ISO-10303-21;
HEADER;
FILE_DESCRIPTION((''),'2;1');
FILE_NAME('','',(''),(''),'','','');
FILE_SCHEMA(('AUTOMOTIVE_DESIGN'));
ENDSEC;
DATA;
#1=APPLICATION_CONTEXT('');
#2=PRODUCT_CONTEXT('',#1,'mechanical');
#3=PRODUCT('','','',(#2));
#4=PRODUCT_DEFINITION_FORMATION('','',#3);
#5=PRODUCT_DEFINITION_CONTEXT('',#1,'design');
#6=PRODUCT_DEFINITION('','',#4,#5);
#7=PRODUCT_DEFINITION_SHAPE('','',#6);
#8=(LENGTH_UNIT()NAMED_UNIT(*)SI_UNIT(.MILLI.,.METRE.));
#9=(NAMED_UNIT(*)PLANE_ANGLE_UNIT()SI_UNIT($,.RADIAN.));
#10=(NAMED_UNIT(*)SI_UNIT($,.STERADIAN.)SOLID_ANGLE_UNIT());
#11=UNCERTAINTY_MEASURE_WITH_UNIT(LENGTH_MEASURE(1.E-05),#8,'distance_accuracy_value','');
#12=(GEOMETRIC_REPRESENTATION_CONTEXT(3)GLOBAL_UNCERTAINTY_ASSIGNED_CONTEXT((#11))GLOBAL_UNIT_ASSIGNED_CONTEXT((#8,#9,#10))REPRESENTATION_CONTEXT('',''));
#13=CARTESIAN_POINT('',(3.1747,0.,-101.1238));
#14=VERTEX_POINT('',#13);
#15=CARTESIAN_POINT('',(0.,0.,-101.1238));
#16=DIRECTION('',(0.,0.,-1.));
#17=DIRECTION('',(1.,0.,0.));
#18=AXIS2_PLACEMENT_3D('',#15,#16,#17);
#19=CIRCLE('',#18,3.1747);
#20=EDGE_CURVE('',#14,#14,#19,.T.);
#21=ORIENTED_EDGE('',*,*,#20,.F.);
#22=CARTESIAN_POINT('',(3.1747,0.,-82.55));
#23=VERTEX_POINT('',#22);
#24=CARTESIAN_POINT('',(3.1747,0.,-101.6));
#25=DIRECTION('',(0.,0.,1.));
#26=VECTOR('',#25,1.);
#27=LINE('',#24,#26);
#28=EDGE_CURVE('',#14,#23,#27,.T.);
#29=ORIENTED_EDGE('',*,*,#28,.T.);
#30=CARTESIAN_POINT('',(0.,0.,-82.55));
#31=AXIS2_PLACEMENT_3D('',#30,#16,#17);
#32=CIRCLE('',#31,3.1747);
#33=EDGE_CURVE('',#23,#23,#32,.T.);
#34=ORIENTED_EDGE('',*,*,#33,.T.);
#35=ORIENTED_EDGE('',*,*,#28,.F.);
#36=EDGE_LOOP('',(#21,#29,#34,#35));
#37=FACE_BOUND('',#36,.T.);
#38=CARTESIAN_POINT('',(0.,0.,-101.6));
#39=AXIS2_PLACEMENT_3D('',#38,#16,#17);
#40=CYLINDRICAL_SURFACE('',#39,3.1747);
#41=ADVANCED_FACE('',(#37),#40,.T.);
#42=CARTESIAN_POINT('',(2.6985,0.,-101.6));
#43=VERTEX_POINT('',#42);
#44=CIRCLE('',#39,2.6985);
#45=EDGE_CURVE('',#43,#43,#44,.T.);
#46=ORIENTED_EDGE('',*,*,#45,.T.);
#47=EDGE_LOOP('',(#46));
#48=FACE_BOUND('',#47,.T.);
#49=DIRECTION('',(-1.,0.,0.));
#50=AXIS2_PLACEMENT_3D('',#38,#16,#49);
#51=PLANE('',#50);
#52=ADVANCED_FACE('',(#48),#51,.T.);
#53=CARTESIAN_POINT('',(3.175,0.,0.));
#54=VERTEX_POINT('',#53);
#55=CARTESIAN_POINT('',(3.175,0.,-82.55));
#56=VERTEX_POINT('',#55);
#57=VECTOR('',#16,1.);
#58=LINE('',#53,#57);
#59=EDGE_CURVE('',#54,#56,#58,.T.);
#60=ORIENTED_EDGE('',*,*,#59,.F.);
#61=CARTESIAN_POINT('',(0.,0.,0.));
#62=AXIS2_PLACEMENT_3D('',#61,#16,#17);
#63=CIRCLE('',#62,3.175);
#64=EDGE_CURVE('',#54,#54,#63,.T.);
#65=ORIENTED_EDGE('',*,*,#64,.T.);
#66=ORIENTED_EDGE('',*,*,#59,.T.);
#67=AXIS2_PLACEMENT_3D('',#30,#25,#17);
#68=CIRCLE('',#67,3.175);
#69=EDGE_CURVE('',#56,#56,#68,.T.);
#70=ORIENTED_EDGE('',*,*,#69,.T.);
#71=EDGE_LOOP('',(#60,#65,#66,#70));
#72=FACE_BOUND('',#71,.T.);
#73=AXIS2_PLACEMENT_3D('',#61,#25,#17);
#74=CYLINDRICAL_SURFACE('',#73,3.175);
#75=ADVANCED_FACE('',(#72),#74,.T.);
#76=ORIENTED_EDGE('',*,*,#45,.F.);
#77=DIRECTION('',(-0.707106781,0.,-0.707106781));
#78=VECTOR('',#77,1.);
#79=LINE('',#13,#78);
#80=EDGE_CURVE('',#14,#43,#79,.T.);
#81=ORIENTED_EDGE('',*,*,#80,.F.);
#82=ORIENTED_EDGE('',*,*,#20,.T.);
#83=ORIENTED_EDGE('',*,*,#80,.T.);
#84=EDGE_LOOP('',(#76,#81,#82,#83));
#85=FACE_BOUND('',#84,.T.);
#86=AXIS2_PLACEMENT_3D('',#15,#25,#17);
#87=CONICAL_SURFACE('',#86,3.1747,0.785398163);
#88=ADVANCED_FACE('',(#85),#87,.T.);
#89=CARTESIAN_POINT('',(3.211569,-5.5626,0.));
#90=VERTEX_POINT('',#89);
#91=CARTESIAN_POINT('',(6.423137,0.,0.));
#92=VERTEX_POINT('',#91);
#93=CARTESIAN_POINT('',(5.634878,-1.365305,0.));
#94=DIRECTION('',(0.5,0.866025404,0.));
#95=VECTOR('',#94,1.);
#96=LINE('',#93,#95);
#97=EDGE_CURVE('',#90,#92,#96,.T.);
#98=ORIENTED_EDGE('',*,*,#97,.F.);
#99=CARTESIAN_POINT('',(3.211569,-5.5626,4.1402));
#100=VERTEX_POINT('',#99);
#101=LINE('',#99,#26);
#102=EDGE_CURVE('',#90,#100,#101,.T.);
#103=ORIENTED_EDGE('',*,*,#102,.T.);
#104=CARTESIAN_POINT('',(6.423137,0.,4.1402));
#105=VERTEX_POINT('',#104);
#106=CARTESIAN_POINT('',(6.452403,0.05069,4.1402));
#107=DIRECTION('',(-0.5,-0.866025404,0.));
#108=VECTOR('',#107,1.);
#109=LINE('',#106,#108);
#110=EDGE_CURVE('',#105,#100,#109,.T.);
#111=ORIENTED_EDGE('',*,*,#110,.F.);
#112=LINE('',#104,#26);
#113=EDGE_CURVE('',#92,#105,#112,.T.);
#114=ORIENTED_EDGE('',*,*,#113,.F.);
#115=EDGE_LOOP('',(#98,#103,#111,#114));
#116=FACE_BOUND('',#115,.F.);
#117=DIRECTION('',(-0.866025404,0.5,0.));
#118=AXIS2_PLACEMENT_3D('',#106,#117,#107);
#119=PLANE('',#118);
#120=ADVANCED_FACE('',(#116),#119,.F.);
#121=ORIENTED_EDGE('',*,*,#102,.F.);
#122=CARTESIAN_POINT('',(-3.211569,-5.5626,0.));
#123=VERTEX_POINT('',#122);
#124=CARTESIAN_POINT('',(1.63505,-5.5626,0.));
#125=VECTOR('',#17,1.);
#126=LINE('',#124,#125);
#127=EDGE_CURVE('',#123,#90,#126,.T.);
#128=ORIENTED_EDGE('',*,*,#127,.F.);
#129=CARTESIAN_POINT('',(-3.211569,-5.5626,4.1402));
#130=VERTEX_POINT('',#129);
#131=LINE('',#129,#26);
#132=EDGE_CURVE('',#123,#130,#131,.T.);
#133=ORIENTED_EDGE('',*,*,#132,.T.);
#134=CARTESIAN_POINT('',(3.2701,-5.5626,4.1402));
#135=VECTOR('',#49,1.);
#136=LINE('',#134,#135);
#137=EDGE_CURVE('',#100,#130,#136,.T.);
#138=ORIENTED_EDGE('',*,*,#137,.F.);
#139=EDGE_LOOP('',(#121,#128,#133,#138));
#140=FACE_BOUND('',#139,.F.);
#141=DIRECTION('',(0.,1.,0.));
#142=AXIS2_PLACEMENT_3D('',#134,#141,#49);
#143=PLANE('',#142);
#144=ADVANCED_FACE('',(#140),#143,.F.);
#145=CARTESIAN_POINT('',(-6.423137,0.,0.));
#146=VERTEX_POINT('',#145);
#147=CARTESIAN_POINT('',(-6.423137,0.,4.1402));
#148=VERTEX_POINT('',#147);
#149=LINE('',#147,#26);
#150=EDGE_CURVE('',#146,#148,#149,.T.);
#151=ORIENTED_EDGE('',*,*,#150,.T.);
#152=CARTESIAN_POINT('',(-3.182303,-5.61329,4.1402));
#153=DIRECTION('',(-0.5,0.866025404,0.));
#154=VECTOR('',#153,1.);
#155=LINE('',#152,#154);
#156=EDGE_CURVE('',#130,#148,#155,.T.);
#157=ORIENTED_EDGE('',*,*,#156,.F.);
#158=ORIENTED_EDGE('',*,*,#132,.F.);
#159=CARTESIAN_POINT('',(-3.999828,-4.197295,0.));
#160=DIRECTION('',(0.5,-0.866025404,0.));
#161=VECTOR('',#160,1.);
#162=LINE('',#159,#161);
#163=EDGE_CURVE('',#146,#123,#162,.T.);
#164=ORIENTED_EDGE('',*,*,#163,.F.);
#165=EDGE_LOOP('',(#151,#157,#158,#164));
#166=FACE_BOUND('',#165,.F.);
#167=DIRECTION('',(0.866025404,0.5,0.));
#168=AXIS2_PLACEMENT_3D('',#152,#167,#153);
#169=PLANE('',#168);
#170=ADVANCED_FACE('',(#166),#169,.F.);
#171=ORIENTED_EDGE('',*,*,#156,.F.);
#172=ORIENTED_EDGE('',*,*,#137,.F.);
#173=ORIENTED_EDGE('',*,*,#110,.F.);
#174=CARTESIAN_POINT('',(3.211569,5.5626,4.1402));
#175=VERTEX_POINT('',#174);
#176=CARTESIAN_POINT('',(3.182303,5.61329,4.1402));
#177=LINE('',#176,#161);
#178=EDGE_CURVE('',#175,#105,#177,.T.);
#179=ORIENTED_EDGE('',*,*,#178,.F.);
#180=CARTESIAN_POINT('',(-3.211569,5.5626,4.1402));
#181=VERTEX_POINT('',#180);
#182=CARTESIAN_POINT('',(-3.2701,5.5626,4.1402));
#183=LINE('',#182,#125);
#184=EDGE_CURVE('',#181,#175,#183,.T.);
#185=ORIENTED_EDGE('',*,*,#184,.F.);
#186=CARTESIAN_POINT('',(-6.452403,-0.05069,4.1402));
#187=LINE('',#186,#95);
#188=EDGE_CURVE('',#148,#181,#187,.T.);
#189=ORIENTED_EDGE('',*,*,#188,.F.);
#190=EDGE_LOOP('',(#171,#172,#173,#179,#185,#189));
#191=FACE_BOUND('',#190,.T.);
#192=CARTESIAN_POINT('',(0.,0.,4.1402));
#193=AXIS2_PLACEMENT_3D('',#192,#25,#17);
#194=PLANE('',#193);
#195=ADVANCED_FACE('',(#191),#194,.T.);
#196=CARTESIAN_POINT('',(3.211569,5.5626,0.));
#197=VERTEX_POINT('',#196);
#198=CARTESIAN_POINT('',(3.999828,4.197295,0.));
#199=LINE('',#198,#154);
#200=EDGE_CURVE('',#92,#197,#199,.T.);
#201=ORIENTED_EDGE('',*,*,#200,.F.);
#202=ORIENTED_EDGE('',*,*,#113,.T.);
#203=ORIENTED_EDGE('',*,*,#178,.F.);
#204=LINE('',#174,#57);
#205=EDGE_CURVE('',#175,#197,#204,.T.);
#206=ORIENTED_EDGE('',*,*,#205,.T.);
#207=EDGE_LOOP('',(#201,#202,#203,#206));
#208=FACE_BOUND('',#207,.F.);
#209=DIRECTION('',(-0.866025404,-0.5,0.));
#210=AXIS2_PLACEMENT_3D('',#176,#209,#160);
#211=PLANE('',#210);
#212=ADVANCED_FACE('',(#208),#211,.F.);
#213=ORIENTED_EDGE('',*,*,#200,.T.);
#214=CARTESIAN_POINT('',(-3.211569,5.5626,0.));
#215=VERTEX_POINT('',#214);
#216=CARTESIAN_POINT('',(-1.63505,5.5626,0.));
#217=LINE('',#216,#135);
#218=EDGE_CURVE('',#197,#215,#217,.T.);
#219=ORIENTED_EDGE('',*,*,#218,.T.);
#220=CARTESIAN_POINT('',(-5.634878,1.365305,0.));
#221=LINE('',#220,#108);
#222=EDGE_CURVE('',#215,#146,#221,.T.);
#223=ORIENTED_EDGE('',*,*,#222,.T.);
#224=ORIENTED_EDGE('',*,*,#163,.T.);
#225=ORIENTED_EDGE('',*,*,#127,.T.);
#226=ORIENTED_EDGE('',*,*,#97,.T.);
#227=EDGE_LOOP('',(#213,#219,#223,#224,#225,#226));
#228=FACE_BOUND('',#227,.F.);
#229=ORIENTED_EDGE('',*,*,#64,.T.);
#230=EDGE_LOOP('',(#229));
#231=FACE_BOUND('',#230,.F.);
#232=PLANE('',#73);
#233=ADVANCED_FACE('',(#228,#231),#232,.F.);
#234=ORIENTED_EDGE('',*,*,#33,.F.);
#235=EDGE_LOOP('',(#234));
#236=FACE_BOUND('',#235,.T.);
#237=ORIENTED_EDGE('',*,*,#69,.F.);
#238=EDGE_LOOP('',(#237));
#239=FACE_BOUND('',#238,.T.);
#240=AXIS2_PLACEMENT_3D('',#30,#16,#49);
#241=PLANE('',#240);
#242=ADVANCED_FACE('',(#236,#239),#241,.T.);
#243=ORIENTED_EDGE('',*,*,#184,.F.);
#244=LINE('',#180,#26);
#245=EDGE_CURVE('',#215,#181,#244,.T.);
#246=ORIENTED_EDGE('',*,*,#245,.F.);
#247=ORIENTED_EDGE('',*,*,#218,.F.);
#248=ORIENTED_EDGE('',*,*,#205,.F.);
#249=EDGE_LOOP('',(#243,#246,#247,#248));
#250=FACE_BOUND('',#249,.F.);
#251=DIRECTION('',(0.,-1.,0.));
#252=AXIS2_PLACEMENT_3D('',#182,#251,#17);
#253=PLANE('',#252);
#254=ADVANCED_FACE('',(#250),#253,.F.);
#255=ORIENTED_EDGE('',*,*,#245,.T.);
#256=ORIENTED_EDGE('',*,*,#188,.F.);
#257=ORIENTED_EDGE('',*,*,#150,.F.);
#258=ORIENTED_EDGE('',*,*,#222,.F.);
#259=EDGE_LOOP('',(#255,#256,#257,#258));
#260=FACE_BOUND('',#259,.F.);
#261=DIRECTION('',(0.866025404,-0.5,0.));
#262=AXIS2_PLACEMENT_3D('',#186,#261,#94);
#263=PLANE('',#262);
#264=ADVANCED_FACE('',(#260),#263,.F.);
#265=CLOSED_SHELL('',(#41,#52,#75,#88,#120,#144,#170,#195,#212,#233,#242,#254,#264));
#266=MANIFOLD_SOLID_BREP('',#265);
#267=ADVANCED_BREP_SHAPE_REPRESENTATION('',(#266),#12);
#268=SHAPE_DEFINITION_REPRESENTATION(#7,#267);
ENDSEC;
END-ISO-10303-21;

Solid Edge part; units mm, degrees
sketch "Sketch1" plane through (0, 0, 0) normal (0, 0, 1) x (1, 0, 0)
  circle A0 centre (0, 0) radius 6.4526
  dimension "D1" = 12.9052
extrude "Protrusion1" add sketch "Sketch1" along normal blind 4.1402
sketch "Sketch2" plane through (0, 0, 0) normal (0, 0, -1) x (1, 0, 0)
  circle A0 centre (0, 0) radius 3.175
extrude "Protrusion2" add sketch "Sketch2" along normal blind 101.6
sketch "Sketch3" plane through (0, 0, -101.6) normal (0, 0, -1) x (1, 0, 0)
  circle A0 centre (0, 0) radius 3.1747
extrude "Cutout1" cut sketch "Sketch3" against normal blind 19.05 flip side to cut
chamfer "Chamfer_1" distance 0.4762 angle 45 1 edges at (-3.1747, 0, -101.6)
sketch "Sketch4" plane through (0, 0, 4.1402) normal (0, 0, 1) x (1, 0, 0)
  line L0 (-3.2701, 5.5626) -> (3.2701, 5.5626)
  dimension "D1" = 11.1252
extrude "Cutout2" cut sketch "Sketch4" against normal up to next material side at (0, 5.6126, 4.1402)
pattern_circular "Pattern1" count 6 over 360 about axis through (0, 0, 4.1402) along (0, 0, 1) of "Cutout2"
properties part number "24101745"
